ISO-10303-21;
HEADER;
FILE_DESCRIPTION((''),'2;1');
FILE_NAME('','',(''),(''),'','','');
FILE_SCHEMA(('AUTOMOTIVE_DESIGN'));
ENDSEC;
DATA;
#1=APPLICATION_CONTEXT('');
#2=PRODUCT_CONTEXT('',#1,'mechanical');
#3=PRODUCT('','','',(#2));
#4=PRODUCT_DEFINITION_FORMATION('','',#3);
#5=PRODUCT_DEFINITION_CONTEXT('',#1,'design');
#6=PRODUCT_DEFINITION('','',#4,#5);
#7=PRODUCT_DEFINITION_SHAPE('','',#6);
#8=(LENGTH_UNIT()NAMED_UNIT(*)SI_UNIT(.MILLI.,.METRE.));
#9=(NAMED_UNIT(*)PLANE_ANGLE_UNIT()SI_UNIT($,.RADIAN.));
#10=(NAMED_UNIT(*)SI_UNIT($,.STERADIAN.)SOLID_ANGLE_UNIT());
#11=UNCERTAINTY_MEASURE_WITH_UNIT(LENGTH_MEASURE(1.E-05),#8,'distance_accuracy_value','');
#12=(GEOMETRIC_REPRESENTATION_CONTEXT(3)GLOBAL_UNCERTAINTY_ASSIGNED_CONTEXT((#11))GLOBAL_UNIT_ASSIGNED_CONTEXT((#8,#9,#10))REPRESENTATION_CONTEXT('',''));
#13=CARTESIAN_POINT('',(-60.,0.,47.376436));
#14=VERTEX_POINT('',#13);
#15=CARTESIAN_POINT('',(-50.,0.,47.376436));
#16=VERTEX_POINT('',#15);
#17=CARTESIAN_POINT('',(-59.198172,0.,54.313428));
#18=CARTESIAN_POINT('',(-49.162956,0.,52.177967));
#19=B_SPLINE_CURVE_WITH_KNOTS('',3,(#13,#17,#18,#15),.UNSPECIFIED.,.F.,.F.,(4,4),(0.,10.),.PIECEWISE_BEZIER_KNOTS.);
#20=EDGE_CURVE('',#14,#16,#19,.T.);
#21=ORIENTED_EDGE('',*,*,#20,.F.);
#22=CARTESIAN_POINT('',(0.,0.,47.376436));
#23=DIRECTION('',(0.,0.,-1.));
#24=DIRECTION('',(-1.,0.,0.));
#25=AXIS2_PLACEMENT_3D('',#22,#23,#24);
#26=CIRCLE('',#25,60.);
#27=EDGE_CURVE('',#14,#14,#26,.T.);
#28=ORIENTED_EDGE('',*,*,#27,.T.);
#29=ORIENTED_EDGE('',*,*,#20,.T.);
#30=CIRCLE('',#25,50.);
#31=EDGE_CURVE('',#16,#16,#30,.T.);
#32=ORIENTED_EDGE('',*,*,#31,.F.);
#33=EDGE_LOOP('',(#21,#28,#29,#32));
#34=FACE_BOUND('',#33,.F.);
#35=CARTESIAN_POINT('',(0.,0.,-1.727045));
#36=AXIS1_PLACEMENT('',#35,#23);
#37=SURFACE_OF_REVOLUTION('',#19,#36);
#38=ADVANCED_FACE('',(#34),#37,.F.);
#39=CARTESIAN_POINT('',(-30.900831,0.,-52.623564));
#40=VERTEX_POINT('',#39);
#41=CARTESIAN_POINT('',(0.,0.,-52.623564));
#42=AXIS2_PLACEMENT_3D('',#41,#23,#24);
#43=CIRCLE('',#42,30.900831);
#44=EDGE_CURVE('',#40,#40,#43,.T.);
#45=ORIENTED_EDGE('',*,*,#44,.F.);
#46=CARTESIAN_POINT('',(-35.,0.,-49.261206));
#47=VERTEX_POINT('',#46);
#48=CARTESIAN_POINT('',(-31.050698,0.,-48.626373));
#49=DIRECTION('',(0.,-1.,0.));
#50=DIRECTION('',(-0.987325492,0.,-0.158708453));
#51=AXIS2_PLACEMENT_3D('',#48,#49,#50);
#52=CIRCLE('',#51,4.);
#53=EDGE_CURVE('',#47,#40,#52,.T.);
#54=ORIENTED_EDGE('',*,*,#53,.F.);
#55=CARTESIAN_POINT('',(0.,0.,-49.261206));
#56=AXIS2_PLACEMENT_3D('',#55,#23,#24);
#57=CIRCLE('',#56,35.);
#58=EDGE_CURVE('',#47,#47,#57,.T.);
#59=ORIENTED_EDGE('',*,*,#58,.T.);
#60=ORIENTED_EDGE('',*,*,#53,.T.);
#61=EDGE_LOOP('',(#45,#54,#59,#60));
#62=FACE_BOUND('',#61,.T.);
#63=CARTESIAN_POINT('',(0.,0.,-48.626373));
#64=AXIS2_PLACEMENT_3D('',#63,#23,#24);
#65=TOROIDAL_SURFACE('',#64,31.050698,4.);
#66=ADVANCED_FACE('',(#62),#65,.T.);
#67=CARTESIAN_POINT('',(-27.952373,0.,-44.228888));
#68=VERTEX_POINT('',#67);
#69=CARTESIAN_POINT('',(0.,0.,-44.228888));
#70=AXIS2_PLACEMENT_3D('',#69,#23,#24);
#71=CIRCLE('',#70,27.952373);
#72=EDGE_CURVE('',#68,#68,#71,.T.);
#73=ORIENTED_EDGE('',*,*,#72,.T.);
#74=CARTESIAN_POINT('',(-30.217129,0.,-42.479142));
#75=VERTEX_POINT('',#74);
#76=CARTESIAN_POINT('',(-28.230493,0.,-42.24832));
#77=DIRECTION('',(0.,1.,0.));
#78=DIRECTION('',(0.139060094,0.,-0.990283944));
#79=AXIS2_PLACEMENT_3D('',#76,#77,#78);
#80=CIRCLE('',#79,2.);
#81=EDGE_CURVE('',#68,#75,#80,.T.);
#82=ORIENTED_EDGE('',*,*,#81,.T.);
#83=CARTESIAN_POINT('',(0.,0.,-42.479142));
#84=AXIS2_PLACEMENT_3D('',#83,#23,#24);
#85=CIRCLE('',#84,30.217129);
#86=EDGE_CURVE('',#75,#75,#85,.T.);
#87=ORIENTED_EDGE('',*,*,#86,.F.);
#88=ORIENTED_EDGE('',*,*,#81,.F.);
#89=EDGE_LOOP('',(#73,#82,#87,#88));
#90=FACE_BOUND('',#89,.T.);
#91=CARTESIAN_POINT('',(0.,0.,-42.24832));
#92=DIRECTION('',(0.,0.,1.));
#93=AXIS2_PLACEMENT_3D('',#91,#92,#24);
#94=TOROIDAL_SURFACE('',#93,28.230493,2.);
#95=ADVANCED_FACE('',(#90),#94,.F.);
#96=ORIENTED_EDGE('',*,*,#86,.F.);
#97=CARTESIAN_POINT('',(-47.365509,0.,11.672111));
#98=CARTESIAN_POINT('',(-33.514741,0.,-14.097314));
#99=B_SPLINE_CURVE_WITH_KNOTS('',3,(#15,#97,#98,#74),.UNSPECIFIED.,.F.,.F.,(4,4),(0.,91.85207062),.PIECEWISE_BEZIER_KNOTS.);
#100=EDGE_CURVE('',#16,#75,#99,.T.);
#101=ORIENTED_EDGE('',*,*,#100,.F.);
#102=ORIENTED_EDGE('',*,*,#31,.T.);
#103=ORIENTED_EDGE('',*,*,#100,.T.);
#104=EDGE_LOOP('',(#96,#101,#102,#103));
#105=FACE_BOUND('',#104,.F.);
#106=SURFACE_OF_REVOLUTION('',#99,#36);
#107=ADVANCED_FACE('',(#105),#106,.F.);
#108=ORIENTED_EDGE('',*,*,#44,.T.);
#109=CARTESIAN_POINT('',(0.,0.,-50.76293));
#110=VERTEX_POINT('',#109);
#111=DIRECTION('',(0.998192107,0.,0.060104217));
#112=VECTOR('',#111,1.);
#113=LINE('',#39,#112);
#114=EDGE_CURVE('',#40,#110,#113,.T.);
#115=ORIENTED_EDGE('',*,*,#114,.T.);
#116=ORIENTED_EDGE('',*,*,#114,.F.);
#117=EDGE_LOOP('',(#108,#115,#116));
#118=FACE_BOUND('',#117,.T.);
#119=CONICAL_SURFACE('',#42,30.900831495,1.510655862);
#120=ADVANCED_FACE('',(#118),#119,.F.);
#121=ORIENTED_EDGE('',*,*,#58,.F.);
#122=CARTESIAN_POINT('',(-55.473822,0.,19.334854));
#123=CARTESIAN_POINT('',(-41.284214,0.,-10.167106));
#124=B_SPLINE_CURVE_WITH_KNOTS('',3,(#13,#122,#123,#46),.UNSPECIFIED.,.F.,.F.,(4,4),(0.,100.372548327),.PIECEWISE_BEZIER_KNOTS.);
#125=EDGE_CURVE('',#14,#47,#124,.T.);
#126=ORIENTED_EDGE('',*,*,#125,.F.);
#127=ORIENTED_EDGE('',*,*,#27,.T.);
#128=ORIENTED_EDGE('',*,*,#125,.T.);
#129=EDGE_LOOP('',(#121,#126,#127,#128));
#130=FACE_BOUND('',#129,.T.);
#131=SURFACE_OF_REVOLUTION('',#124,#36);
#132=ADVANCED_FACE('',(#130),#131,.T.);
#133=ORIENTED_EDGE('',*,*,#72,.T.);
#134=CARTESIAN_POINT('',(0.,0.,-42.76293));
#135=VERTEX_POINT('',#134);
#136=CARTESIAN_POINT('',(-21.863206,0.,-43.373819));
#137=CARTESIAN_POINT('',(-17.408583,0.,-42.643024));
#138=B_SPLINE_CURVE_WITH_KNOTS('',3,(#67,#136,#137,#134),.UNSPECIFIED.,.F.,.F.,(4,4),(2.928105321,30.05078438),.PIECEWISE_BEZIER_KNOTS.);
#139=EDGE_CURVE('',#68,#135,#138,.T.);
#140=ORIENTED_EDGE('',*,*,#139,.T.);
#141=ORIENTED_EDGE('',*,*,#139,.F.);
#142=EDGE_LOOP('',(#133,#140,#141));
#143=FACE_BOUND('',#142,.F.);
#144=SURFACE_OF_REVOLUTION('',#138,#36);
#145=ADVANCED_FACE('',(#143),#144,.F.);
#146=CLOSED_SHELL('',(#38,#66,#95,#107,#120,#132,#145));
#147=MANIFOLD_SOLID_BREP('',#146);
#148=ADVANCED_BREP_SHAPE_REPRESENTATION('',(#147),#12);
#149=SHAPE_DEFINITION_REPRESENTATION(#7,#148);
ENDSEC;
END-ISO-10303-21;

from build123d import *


with BuildPart() as f1:
    # F0 (on Front) → F1 (revolve)
    with BuildSketch(Plane.XZ):
        with BuildLine():
            add(Edge.make_bspline(
                [(-60, 47.3764357992), (-59.1981715925, 54.3134284554), (-49.1629564653, 52.1779667281), (-50, 47.3764357992)],
                knots=[0, 0, 0, 0, 10, 10, 10, 10], degree=3))
            add(Edge.make_bspline(
                [(-60, 47.3764357992), (-55.4738223712, 19.3348543775), (-41.2842135029, -10.1671062354), (-35, -49.2612064975)],
                knots=[0, 0, 0, 0, 100.372548327, 100.372548327, 100.372548327, 100.372548327], degree=3))
            ThreePointArc((-35, -49.2612064975), (-33.5874853172, -51.7190592626), (-30.900831495, -52.6235642008))
            Line((-30.900831495, -52.6235642008), (0, -50.7629300788))
            Line((0, -50.7629300788), (0, -42.7629300788))
            add(Edge.make_bspline(
                [(-27.9523732894, -44.2288875024), (-21.8632061772, -43.3738194628), (-17.4085828413, -42.6430236165), (0, -42.7629300788)],
                knots=[2.9281053207, 2.9281053207, 2.9281053207, 2.9281053207, 30.0507843803, 30.0507843803, 30.0507843803, 30.0507843803], degree=3))
            add(Edge.make_bspline(
                [(-30, -44.5092524641), (-29.2861701407, -44.4149584453), (-28.6097465002, -44.3211987844), (-27.9523732894, -44.2288875024)],
                knots=[0, 0, 0, 0, 2.9281053207, 2.9281053207, 2.9281053207, 2.9281053207], degree=3))
            add(Edge.make_bspline(
                [(-30.2171291126, -42.4791417374), (-30.1386829619, -43.1543106337), (-30.0662089029, -43.8309579045), (-30, -44.5092524641)],
                knots=[91.8520706201, 91.8520706201, 91.8520706201, 91.8520706201, 94.0371187756, 94.0371187756, 94.0371187756, 94.0371187756], degree=3))
            add(Edge.make_bspline(
                [(-50, 47.3764357992), (-47.3655089991, 11.672110508), (-33.514741275, -14.0973136357), (-30.2171291126, -42.4791417374)],
                knots=[0, 0, 0, 0, 91.8520706201, 91.8520706201, 91.8520706201, 91.8520706201], degree=3))
        make_face()
        with BuildLine():
            ThreePointArc((-27.9523732894, -44.2288875024), (-29.4532603476, -43.8309886194), (-30.2171291126, -42.4791417374))
            add(Edge.make_bspline(
                [(-30.2171291126, -42.4791417374), (-30.1386829619, -43.1543106337), (-30.0662089029, -43.8309579045), (-30, -44.5092524641)],
                knots=[91.8520706201, 91.8520706201, 91.8520706201, 91.8520706201, 94.0371187756, 94.0371187756, 94.0371187756, 94.0371187756], degree=3))
            add(Edge.make_bspline(
                [(-30, -44.5092524641), (-29.2861701407, -44.4149584453), (-28.6097465002, -44.3211987844), (-27.9523732894, -44.2288875024)],
                knots=[0, 0, 0, 0, 2.9281053207, 2.9281053207, 2.9281053207, 2.9281053207], degree=3))
        make_face()
    revolve(axis=Axis((0, 0, -1.7270445824), (0, 0, -1)))


solid = f1.part
